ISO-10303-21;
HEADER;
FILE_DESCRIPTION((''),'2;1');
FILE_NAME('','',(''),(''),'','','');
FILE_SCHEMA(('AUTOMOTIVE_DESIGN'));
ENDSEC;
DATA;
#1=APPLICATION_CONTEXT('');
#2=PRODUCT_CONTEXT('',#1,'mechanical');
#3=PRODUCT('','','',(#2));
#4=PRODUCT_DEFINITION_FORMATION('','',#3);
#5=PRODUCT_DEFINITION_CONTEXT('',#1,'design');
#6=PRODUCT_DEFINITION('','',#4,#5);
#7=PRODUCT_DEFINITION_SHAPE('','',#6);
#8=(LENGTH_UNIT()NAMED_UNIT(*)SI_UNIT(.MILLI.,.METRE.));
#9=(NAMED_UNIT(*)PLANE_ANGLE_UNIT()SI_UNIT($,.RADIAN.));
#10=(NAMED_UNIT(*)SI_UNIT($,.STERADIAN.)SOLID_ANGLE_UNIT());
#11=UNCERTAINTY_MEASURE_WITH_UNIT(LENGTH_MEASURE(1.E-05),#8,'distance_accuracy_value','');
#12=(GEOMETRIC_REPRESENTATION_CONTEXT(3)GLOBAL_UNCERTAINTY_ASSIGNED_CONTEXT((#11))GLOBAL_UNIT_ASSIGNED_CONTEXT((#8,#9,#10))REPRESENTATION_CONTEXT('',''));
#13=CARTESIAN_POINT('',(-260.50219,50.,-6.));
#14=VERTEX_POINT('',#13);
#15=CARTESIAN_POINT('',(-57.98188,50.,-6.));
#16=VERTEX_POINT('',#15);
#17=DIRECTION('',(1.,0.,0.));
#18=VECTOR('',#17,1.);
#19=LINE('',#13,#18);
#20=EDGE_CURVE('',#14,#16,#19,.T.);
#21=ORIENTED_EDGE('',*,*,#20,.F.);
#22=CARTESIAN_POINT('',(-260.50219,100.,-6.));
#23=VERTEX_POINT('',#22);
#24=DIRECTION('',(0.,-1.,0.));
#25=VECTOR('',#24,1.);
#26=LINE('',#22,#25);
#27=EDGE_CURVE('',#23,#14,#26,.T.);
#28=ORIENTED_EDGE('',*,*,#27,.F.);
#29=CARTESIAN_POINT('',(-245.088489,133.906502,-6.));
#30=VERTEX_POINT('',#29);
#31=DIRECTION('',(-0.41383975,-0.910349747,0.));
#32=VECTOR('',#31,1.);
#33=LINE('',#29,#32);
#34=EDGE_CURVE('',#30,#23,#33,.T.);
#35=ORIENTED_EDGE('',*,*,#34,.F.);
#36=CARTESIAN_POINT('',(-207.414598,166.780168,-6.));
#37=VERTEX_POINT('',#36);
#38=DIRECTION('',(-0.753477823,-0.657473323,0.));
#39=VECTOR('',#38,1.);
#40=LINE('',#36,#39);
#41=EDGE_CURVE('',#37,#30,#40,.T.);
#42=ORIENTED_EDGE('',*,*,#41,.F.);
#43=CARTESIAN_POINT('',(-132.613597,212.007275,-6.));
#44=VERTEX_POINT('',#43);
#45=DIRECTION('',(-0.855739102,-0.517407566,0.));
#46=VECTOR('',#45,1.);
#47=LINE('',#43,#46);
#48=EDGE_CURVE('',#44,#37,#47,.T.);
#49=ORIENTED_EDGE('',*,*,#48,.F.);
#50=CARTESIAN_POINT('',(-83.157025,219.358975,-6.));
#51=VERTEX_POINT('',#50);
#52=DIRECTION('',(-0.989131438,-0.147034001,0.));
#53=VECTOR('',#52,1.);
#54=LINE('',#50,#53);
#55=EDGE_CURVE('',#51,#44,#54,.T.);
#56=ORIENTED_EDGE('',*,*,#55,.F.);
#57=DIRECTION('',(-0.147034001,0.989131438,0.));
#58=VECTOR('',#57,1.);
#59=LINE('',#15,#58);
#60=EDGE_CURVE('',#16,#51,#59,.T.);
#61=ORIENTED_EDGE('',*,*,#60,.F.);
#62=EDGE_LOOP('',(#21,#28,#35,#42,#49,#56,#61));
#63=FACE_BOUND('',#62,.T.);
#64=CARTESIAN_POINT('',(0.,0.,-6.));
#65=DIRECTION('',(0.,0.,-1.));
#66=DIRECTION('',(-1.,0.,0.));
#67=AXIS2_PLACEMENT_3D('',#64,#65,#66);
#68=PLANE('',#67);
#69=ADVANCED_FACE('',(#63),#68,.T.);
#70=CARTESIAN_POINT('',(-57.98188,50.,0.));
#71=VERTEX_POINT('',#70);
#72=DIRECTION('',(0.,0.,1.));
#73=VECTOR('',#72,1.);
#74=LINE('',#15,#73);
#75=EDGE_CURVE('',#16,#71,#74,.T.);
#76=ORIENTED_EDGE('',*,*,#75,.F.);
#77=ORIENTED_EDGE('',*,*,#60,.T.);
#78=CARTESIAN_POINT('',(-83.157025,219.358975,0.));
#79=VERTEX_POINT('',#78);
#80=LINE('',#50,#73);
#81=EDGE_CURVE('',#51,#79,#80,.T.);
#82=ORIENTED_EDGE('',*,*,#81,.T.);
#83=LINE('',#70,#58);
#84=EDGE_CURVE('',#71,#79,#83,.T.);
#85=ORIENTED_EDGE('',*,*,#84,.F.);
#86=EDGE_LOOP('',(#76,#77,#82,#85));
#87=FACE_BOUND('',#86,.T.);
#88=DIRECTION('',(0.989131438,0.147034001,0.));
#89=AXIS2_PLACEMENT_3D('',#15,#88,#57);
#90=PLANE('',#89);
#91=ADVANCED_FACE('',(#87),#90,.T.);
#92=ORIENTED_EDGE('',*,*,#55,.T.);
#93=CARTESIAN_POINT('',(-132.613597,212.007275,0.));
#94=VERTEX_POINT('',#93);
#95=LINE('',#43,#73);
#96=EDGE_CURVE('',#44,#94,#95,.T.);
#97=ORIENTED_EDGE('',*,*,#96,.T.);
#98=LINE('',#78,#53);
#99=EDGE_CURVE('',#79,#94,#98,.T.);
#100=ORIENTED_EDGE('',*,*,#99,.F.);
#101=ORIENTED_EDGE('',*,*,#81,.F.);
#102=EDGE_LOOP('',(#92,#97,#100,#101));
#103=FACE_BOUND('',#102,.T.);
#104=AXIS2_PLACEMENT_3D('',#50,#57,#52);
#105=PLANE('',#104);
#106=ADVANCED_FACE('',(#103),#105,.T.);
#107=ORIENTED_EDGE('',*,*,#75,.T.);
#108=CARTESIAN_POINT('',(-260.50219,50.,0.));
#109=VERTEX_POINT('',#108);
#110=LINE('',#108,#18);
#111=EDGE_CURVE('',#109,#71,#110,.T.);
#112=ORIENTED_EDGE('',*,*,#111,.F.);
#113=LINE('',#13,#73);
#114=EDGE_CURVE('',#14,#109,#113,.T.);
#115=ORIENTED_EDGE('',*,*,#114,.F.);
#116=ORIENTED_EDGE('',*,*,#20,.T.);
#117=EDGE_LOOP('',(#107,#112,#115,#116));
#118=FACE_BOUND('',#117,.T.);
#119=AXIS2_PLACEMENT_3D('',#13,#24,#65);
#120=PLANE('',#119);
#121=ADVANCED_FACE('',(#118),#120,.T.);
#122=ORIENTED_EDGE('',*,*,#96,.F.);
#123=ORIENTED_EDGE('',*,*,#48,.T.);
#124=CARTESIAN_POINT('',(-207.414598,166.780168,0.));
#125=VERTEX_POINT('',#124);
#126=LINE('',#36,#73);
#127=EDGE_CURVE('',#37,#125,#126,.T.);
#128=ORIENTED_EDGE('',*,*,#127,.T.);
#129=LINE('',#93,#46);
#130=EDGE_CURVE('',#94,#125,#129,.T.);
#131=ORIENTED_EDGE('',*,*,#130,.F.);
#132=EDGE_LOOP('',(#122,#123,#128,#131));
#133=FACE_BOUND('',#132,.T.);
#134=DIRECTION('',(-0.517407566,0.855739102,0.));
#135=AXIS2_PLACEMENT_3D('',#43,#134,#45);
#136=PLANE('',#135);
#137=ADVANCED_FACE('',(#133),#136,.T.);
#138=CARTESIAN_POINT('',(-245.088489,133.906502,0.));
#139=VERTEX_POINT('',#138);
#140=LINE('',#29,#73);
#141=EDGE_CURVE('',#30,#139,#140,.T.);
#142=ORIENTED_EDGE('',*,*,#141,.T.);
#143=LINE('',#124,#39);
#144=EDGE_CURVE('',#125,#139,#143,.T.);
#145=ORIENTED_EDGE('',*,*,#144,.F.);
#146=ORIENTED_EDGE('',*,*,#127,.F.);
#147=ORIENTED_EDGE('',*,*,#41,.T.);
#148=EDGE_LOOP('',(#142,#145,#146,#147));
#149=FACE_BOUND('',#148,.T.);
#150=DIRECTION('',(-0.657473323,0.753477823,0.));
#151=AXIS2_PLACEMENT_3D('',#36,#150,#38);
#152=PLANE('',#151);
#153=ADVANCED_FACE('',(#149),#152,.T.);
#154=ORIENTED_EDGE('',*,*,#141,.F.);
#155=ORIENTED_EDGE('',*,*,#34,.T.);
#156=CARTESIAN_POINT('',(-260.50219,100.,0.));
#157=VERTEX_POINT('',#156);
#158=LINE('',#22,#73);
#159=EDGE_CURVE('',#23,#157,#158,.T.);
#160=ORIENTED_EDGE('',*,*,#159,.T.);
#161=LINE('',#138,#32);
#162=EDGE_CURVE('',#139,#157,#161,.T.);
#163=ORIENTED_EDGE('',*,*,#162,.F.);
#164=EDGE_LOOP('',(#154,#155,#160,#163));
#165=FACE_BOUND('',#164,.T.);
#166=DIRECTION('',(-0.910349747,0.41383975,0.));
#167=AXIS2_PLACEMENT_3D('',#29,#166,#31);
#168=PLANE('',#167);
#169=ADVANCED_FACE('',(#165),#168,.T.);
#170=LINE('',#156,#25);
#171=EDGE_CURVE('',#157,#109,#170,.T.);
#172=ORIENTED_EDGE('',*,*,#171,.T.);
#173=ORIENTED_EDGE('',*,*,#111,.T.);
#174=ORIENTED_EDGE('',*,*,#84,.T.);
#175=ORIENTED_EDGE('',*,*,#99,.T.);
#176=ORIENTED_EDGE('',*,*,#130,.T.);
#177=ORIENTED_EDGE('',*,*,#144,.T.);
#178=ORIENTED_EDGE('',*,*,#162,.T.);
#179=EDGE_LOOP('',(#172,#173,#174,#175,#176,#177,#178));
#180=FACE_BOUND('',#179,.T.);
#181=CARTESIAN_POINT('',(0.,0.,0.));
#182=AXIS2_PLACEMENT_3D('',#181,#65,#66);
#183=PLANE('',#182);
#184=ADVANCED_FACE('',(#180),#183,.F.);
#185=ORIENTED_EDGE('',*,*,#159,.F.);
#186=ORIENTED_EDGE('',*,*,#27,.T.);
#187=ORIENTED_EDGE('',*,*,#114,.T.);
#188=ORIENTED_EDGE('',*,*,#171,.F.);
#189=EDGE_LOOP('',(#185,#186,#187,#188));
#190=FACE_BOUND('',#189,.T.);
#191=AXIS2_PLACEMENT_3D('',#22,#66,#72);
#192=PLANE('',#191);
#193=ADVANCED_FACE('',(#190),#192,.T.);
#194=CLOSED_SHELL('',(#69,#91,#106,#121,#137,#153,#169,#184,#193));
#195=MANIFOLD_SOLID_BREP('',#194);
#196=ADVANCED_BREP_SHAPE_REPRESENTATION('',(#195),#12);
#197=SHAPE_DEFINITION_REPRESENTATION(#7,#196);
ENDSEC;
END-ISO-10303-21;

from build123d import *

# Parameters (mm, degrees)
SM_BASE_FLANGE_1_DEPTH = 6


# Sheet-metal steps are written as plain solids
with BuildPart() as part:
    # Sketch 1 → Базовая кромка1 (new body)
    with BuildSketch(Plane.XY):
        Polygon((-207.414598297, 166.780168175), (-245.088489453, 133.906502041), (-260.502189932, 100), (-260.502189932, 50), (-57.98187967, 50), (-83.157025012, 219.358975323), (-132.613596936, 212.007275279), align=None)
    extrude(amount=-SM_BASE_FLANGE_1_DEPTH)


solid = part.part
